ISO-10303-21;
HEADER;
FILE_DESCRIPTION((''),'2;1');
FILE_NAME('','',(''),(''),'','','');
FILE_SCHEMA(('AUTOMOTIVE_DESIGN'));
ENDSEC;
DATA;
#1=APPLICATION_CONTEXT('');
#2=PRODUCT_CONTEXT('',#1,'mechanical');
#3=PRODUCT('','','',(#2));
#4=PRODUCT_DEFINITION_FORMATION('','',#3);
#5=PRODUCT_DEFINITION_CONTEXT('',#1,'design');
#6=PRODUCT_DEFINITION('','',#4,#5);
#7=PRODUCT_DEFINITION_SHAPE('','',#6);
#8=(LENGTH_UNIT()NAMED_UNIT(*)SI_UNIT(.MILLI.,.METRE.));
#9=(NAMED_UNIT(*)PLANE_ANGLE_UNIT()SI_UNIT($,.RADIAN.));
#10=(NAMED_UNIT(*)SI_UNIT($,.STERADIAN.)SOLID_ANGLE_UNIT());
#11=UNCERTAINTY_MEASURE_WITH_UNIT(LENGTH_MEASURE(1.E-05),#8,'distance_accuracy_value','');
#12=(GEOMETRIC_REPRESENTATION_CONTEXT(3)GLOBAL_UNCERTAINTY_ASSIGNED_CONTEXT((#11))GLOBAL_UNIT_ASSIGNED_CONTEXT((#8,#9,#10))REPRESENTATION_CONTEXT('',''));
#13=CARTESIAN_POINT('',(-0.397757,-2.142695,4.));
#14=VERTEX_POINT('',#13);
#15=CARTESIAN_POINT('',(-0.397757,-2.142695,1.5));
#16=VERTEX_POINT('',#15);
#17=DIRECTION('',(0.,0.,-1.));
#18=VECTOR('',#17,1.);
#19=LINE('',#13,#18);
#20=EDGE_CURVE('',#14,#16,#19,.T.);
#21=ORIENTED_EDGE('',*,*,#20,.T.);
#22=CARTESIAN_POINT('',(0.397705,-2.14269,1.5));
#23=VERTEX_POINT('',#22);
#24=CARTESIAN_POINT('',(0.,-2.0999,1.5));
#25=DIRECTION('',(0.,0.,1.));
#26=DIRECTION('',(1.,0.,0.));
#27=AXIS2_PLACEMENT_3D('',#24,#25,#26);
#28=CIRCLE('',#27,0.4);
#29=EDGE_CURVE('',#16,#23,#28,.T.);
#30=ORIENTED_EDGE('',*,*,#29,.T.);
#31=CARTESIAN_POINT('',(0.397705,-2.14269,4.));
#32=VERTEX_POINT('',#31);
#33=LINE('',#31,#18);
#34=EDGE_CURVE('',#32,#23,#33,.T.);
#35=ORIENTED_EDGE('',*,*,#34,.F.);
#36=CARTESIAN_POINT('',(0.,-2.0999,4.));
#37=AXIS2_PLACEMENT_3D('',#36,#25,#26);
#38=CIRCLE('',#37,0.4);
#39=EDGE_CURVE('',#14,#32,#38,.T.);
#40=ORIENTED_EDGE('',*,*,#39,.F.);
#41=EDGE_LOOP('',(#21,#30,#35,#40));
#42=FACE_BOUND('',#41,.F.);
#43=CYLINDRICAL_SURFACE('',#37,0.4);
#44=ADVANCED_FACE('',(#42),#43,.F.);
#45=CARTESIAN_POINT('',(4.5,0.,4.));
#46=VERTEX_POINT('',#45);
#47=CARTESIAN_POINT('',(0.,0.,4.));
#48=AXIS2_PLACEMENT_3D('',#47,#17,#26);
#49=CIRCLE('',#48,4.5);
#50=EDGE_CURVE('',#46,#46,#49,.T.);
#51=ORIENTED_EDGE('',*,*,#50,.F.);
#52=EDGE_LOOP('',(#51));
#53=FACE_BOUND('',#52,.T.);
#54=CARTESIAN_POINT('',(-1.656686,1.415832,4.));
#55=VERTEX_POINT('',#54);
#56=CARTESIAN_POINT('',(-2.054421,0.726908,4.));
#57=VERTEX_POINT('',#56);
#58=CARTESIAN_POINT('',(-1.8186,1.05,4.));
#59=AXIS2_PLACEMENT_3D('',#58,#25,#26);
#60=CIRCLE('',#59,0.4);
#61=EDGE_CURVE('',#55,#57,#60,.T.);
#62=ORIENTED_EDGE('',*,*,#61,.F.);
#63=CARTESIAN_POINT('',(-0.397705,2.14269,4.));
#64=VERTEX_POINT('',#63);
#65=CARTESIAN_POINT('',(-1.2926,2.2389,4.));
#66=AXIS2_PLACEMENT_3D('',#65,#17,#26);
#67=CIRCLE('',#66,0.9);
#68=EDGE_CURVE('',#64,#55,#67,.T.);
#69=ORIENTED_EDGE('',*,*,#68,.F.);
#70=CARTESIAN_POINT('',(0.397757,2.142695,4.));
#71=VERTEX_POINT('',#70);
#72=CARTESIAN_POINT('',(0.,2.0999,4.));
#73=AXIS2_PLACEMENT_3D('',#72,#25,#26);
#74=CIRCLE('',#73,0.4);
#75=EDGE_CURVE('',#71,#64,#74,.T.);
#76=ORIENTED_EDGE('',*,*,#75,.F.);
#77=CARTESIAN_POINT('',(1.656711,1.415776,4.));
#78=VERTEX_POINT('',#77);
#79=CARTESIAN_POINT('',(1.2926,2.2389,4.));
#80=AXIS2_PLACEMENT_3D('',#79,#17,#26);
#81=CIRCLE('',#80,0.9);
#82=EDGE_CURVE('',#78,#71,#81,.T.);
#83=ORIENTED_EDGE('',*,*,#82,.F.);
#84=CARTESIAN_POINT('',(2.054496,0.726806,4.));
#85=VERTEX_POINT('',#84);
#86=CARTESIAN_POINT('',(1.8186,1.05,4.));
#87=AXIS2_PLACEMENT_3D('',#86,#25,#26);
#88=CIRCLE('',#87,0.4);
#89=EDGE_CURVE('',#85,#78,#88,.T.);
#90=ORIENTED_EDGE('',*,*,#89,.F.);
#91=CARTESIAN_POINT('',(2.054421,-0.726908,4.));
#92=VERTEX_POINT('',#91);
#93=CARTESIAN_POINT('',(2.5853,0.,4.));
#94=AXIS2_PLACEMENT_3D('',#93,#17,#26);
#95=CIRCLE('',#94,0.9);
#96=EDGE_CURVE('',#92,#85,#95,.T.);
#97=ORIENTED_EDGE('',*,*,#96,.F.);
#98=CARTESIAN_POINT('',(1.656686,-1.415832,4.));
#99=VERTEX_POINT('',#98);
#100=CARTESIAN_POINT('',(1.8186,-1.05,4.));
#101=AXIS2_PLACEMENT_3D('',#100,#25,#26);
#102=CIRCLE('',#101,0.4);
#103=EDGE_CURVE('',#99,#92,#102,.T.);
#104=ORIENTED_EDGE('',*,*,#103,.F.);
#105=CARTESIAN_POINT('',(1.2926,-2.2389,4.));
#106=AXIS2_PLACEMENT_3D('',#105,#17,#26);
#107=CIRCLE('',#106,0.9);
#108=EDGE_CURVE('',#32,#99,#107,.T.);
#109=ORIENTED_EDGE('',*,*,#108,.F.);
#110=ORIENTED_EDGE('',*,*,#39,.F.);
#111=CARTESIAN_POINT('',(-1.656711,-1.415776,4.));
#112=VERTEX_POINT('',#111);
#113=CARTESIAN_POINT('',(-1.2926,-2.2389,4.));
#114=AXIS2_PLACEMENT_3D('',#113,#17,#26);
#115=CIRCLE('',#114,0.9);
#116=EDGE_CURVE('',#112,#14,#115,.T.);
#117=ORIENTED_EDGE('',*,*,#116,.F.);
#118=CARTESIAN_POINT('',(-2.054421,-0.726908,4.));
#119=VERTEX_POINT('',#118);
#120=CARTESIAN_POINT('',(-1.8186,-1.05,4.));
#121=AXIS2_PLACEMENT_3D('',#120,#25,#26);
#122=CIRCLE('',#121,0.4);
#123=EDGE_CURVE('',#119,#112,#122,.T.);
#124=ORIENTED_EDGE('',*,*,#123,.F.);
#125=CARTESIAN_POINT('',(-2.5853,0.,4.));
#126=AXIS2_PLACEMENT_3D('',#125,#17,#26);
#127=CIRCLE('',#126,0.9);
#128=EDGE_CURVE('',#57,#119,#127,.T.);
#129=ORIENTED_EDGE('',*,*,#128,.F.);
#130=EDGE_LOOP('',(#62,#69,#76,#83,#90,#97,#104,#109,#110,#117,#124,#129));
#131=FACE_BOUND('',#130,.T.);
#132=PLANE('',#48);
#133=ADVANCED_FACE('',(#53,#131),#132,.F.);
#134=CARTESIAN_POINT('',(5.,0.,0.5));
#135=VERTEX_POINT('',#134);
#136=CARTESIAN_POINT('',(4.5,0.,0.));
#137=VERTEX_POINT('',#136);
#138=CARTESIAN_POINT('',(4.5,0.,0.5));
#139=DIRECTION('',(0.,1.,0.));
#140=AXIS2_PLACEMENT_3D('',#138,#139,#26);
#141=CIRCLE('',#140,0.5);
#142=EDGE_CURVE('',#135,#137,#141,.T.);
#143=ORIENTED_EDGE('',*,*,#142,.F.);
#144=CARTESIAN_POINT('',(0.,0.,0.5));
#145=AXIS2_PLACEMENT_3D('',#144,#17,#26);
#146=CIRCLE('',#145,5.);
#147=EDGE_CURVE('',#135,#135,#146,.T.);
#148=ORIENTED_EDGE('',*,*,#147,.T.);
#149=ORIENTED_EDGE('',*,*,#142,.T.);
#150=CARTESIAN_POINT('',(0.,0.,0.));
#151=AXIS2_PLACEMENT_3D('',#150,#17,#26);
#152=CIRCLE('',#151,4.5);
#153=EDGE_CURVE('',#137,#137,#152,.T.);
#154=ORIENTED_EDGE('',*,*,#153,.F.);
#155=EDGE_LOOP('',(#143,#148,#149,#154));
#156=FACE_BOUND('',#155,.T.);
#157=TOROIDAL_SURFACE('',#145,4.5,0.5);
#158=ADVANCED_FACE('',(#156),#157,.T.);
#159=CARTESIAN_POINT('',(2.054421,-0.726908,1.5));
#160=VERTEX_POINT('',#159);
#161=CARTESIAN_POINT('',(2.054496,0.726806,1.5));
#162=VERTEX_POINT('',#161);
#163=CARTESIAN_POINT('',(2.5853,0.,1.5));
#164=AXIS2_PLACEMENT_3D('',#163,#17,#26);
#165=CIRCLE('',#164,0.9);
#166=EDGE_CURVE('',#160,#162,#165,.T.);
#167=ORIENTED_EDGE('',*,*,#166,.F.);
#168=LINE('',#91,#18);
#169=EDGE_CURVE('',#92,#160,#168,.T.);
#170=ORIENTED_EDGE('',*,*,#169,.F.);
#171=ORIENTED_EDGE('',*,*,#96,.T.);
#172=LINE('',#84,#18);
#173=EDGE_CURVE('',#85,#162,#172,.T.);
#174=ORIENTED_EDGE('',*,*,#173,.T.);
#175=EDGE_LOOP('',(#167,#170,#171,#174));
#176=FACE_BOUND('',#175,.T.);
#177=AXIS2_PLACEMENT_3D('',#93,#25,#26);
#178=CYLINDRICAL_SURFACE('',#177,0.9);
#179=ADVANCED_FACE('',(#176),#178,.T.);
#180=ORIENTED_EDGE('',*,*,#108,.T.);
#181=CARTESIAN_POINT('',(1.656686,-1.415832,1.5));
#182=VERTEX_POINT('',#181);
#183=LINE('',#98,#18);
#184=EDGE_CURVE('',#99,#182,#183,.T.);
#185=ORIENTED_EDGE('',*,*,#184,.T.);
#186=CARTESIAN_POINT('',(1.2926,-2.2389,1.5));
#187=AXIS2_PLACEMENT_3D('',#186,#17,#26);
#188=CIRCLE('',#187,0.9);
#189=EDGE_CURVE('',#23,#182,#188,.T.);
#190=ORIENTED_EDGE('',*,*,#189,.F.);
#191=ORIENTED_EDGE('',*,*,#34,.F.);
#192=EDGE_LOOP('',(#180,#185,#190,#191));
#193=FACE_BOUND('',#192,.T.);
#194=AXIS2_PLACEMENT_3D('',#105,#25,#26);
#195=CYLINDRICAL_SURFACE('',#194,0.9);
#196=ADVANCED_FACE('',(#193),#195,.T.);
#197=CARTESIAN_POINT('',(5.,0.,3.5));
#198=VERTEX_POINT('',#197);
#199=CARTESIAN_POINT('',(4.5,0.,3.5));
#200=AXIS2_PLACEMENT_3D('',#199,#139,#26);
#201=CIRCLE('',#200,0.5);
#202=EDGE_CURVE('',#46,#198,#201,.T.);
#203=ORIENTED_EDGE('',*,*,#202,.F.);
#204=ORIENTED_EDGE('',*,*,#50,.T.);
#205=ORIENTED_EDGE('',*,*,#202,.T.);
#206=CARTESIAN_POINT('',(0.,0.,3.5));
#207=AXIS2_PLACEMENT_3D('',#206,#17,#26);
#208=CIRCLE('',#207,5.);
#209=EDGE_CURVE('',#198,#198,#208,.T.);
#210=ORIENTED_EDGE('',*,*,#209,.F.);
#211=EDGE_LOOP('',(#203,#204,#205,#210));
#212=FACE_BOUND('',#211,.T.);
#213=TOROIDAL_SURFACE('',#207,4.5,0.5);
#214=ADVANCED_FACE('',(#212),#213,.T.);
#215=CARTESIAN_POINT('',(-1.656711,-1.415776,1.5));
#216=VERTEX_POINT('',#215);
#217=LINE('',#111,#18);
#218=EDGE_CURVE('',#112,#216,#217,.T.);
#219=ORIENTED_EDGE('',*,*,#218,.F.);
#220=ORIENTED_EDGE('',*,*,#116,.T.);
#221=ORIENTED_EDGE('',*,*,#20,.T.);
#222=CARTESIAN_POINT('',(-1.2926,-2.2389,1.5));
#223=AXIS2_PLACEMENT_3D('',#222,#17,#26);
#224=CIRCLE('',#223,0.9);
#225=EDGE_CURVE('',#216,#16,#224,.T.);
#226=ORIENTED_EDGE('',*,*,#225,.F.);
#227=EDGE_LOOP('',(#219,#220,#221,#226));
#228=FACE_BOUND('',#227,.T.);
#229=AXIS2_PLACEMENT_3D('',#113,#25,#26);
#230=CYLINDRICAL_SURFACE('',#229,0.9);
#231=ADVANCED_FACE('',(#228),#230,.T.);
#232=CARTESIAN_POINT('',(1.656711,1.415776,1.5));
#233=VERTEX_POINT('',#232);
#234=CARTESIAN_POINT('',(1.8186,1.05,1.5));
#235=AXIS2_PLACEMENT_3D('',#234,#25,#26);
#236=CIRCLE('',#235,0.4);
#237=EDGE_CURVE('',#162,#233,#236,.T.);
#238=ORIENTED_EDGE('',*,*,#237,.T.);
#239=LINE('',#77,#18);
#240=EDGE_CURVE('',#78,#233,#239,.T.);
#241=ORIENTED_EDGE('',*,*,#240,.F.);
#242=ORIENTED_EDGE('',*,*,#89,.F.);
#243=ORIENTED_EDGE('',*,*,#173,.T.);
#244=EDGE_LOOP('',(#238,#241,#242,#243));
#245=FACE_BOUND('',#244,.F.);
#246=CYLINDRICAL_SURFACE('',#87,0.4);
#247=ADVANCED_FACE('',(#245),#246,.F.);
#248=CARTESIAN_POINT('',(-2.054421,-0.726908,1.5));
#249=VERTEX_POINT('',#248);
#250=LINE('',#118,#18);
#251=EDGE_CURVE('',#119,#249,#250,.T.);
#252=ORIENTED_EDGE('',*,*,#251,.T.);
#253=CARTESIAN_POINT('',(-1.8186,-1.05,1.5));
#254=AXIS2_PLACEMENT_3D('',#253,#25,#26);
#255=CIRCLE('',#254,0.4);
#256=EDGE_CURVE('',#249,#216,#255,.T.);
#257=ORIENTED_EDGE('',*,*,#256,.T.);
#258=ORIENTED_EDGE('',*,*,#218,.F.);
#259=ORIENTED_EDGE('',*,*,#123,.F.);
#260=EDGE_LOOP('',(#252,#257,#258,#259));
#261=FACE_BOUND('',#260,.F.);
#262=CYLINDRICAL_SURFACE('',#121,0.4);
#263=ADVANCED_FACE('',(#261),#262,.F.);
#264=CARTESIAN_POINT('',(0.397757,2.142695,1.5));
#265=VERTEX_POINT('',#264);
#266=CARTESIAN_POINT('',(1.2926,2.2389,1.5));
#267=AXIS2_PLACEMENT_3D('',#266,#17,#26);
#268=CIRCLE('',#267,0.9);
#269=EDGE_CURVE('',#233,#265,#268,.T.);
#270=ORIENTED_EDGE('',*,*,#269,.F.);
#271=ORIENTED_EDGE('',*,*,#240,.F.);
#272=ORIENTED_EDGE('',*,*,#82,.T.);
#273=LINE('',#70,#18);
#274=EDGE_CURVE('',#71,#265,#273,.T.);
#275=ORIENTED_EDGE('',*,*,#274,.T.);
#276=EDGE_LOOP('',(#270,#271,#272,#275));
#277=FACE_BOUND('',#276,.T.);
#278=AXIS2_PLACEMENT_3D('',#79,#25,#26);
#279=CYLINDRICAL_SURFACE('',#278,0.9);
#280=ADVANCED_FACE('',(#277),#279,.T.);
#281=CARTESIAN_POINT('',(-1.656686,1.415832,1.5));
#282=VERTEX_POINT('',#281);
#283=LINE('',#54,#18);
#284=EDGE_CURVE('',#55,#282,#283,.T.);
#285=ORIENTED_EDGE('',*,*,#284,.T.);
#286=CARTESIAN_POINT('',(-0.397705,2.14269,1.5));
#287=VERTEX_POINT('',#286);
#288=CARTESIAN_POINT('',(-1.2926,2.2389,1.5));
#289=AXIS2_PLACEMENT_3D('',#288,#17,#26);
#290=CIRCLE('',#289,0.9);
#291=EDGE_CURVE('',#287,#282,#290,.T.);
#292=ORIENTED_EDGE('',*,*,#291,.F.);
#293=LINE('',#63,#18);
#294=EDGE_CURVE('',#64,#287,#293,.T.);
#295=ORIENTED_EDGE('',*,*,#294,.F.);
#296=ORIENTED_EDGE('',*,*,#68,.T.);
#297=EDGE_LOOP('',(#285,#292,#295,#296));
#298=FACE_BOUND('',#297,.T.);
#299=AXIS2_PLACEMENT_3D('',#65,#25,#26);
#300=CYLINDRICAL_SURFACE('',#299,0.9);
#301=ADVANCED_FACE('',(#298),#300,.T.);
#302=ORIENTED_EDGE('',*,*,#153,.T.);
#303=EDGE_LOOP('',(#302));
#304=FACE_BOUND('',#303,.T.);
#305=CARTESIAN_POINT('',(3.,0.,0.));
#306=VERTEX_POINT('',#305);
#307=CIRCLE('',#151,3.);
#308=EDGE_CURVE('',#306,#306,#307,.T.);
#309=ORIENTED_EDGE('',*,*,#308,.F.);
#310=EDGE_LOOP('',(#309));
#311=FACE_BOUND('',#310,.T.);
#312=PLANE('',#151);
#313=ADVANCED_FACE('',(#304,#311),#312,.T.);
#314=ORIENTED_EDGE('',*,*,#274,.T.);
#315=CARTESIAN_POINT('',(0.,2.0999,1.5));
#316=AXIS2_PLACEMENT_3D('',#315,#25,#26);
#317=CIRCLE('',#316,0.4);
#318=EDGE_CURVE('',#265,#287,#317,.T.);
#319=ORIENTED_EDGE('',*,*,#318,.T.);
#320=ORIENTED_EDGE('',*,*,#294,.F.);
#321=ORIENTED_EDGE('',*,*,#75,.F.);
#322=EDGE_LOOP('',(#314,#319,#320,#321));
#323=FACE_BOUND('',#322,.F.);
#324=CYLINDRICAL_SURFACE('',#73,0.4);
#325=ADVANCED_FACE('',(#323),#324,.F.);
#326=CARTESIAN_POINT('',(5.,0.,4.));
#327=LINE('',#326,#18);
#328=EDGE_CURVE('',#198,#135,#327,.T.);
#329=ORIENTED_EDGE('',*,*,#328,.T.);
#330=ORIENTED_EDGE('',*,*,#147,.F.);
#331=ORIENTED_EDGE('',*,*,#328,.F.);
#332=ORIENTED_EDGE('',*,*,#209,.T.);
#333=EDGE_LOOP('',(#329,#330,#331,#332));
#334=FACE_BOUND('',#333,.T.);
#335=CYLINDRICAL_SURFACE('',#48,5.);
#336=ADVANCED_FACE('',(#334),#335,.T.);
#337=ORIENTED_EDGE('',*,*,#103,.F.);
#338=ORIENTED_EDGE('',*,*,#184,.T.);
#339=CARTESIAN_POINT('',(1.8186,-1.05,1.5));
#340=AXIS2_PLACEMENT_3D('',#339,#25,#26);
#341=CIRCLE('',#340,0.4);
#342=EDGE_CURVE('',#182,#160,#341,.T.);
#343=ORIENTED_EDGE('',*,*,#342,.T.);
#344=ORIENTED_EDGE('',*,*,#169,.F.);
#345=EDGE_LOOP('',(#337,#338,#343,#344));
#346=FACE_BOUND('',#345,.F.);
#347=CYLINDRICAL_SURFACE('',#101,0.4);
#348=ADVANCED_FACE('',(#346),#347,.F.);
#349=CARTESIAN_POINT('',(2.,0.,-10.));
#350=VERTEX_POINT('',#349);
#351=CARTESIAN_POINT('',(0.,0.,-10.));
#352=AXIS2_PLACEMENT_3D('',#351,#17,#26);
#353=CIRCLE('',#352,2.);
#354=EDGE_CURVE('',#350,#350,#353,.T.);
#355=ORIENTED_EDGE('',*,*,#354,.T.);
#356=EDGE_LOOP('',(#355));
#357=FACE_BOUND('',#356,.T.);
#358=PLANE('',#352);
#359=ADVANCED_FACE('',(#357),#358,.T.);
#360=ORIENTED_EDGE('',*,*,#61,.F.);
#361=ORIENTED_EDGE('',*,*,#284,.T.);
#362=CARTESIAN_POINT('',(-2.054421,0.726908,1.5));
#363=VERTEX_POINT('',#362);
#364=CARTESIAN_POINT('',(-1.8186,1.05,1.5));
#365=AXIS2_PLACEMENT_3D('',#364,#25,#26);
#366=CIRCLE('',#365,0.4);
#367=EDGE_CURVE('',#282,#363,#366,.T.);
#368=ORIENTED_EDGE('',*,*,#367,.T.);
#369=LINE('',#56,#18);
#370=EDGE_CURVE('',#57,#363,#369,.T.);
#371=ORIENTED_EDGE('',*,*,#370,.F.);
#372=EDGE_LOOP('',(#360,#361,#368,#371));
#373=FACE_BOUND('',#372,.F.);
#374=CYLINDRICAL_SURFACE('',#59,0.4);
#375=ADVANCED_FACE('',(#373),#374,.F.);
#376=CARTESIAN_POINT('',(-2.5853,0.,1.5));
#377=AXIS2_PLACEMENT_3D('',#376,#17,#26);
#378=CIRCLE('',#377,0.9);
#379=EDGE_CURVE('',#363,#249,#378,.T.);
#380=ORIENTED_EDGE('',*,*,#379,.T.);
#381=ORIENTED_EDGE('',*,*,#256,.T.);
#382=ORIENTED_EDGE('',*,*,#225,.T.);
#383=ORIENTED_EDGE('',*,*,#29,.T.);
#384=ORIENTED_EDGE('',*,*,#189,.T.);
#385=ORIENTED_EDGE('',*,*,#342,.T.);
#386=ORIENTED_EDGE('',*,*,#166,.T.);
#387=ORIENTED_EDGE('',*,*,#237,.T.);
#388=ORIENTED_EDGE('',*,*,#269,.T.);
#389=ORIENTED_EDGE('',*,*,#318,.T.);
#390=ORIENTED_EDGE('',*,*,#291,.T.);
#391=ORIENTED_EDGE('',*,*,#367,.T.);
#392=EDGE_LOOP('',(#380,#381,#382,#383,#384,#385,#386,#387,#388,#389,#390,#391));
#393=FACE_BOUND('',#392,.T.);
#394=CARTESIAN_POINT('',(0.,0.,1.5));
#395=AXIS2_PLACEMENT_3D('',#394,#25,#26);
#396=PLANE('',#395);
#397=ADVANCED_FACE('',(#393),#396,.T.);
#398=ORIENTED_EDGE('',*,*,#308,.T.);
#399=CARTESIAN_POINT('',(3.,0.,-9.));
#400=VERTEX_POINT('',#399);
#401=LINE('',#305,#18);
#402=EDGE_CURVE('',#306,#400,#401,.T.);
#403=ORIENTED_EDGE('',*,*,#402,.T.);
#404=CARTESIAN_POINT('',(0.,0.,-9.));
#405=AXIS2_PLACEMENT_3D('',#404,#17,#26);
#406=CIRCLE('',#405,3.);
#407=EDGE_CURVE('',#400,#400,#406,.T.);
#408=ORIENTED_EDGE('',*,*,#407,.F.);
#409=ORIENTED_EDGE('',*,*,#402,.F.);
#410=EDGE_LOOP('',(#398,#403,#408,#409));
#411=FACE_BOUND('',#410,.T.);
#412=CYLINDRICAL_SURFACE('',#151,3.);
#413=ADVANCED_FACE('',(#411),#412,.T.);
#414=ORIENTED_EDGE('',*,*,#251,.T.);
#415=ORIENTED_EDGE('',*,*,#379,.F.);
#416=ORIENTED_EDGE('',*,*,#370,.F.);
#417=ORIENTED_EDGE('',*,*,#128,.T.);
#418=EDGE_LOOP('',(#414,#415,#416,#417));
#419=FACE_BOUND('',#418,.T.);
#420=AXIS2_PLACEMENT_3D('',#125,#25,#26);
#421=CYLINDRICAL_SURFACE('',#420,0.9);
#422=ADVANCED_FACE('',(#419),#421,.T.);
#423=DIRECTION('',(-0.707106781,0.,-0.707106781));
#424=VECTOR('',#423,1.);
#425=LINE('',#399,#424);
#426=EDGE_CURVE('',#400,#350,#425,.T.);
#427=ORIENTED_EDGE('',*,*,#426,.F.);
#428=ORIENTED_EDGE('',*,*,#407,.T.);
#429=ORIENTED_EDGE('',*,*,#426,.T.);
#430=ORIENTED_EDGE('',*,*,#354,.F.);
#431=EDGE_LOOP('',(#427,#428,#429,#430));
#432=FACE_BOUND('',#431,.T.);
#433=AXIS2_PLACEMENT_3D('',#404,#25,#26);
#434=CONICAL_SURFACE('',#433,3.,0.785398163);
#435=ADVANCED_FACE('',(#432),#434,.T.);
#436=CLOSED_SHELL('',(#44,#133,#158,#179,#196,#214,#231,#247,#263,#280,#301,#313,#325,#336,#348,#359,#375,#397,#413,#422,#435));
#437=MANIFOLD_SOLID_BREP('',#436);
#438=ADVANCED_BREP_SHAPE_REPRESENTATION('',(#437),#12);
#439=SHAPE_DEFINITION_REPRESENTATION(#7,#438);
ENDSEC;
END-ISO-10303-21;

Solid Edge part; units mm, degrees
sketch "Sketch1" plane through (0, 0, 0) normal (0, -1, 0) x (1, 0, 0)
  line L0 (0, 4) -> (5, 4)
  line L1 (5, 4) -> (5, 0)
  line L2 (5, 0) -> (3, 0)
  line L3 (3, 0) -> (3, -10)
  line L4 (3, -10) -> (0, -10)
  line L5 (0, -10) -> (0, 4)
  dimension "D1" = 3
  dimension "D2" = 10
  dimension "D3" = 4
  dimension "D4" = 5
revolve "RevolvedProtrusion1" add sketch "Sketch1" angle 360 about axis through (0, 0, 54) along (0, 0, -1)
sketch "Sketch2" plane through (0, 0, 4) normal (0, 0, 1) x (1, 0, 0)
  arc A0 (-2.0545, -0.7268) -> (-1.6567, -1.4158) centre (-1.8186, -1.05) ccw
  arc A1 (-1.6567, -1.4158) -> (-0.3978, -2.1427) centre (-1.2926, -2.2389) cw
  arc A2 (-0.3978, -2.1427) -> (0.3978, -2.1427) centre (0, -2.0999) ccw
  arc A3 (0.3978, -2.1427) -> (1.6567, -1.4158) centre (1.2926, -2.2389) cw
  arc A4 (1.6567, -1.4158) -> (2.0545, -0.7268) centre (1.8186, -1.05) ccw
  arc A5 (2.0545, -0.7268) -> (2.0545, 0.7268) centre (2.5853, 0) cw
  arc A6 (2.0545, 0.7268) -> (1.6567, 1.4158) centre (1.8186, 1.05) ccw
  arc A7 (1.6567, 1.4158) -> (0.3978, 2.1427) centre (1.2926, 2.2389) cw
  arc A8 (0.3978, 2.1427) -> (-0.3978, 2.1427) centre (0, 2.0999) ccw
  arc A9 (-0.3978, 2.1427) -> (-1.6567, 1.4158) centre (-1.2926, 2.2389) cw
  arc A10 (-1.6567, 1.4158) -> (-2.0545, 0.7268) centre (-1.8186, 1.05) ccw
  arc A11 (-2.0545, 0.7268) -> (-2.0545, -0.7268) centre (-2.5853, 0) cw
extrude "Cutout1" cut sketch "Sketch2" against normal blind 2.5
fillet "Verrundung_1" radius 0.5 2 edges at (-5, 0, 4) (-5, 0, 0)
chamfer "Fase_1" distance 1 angle 45 1 edges at (-3, 0, -10)
